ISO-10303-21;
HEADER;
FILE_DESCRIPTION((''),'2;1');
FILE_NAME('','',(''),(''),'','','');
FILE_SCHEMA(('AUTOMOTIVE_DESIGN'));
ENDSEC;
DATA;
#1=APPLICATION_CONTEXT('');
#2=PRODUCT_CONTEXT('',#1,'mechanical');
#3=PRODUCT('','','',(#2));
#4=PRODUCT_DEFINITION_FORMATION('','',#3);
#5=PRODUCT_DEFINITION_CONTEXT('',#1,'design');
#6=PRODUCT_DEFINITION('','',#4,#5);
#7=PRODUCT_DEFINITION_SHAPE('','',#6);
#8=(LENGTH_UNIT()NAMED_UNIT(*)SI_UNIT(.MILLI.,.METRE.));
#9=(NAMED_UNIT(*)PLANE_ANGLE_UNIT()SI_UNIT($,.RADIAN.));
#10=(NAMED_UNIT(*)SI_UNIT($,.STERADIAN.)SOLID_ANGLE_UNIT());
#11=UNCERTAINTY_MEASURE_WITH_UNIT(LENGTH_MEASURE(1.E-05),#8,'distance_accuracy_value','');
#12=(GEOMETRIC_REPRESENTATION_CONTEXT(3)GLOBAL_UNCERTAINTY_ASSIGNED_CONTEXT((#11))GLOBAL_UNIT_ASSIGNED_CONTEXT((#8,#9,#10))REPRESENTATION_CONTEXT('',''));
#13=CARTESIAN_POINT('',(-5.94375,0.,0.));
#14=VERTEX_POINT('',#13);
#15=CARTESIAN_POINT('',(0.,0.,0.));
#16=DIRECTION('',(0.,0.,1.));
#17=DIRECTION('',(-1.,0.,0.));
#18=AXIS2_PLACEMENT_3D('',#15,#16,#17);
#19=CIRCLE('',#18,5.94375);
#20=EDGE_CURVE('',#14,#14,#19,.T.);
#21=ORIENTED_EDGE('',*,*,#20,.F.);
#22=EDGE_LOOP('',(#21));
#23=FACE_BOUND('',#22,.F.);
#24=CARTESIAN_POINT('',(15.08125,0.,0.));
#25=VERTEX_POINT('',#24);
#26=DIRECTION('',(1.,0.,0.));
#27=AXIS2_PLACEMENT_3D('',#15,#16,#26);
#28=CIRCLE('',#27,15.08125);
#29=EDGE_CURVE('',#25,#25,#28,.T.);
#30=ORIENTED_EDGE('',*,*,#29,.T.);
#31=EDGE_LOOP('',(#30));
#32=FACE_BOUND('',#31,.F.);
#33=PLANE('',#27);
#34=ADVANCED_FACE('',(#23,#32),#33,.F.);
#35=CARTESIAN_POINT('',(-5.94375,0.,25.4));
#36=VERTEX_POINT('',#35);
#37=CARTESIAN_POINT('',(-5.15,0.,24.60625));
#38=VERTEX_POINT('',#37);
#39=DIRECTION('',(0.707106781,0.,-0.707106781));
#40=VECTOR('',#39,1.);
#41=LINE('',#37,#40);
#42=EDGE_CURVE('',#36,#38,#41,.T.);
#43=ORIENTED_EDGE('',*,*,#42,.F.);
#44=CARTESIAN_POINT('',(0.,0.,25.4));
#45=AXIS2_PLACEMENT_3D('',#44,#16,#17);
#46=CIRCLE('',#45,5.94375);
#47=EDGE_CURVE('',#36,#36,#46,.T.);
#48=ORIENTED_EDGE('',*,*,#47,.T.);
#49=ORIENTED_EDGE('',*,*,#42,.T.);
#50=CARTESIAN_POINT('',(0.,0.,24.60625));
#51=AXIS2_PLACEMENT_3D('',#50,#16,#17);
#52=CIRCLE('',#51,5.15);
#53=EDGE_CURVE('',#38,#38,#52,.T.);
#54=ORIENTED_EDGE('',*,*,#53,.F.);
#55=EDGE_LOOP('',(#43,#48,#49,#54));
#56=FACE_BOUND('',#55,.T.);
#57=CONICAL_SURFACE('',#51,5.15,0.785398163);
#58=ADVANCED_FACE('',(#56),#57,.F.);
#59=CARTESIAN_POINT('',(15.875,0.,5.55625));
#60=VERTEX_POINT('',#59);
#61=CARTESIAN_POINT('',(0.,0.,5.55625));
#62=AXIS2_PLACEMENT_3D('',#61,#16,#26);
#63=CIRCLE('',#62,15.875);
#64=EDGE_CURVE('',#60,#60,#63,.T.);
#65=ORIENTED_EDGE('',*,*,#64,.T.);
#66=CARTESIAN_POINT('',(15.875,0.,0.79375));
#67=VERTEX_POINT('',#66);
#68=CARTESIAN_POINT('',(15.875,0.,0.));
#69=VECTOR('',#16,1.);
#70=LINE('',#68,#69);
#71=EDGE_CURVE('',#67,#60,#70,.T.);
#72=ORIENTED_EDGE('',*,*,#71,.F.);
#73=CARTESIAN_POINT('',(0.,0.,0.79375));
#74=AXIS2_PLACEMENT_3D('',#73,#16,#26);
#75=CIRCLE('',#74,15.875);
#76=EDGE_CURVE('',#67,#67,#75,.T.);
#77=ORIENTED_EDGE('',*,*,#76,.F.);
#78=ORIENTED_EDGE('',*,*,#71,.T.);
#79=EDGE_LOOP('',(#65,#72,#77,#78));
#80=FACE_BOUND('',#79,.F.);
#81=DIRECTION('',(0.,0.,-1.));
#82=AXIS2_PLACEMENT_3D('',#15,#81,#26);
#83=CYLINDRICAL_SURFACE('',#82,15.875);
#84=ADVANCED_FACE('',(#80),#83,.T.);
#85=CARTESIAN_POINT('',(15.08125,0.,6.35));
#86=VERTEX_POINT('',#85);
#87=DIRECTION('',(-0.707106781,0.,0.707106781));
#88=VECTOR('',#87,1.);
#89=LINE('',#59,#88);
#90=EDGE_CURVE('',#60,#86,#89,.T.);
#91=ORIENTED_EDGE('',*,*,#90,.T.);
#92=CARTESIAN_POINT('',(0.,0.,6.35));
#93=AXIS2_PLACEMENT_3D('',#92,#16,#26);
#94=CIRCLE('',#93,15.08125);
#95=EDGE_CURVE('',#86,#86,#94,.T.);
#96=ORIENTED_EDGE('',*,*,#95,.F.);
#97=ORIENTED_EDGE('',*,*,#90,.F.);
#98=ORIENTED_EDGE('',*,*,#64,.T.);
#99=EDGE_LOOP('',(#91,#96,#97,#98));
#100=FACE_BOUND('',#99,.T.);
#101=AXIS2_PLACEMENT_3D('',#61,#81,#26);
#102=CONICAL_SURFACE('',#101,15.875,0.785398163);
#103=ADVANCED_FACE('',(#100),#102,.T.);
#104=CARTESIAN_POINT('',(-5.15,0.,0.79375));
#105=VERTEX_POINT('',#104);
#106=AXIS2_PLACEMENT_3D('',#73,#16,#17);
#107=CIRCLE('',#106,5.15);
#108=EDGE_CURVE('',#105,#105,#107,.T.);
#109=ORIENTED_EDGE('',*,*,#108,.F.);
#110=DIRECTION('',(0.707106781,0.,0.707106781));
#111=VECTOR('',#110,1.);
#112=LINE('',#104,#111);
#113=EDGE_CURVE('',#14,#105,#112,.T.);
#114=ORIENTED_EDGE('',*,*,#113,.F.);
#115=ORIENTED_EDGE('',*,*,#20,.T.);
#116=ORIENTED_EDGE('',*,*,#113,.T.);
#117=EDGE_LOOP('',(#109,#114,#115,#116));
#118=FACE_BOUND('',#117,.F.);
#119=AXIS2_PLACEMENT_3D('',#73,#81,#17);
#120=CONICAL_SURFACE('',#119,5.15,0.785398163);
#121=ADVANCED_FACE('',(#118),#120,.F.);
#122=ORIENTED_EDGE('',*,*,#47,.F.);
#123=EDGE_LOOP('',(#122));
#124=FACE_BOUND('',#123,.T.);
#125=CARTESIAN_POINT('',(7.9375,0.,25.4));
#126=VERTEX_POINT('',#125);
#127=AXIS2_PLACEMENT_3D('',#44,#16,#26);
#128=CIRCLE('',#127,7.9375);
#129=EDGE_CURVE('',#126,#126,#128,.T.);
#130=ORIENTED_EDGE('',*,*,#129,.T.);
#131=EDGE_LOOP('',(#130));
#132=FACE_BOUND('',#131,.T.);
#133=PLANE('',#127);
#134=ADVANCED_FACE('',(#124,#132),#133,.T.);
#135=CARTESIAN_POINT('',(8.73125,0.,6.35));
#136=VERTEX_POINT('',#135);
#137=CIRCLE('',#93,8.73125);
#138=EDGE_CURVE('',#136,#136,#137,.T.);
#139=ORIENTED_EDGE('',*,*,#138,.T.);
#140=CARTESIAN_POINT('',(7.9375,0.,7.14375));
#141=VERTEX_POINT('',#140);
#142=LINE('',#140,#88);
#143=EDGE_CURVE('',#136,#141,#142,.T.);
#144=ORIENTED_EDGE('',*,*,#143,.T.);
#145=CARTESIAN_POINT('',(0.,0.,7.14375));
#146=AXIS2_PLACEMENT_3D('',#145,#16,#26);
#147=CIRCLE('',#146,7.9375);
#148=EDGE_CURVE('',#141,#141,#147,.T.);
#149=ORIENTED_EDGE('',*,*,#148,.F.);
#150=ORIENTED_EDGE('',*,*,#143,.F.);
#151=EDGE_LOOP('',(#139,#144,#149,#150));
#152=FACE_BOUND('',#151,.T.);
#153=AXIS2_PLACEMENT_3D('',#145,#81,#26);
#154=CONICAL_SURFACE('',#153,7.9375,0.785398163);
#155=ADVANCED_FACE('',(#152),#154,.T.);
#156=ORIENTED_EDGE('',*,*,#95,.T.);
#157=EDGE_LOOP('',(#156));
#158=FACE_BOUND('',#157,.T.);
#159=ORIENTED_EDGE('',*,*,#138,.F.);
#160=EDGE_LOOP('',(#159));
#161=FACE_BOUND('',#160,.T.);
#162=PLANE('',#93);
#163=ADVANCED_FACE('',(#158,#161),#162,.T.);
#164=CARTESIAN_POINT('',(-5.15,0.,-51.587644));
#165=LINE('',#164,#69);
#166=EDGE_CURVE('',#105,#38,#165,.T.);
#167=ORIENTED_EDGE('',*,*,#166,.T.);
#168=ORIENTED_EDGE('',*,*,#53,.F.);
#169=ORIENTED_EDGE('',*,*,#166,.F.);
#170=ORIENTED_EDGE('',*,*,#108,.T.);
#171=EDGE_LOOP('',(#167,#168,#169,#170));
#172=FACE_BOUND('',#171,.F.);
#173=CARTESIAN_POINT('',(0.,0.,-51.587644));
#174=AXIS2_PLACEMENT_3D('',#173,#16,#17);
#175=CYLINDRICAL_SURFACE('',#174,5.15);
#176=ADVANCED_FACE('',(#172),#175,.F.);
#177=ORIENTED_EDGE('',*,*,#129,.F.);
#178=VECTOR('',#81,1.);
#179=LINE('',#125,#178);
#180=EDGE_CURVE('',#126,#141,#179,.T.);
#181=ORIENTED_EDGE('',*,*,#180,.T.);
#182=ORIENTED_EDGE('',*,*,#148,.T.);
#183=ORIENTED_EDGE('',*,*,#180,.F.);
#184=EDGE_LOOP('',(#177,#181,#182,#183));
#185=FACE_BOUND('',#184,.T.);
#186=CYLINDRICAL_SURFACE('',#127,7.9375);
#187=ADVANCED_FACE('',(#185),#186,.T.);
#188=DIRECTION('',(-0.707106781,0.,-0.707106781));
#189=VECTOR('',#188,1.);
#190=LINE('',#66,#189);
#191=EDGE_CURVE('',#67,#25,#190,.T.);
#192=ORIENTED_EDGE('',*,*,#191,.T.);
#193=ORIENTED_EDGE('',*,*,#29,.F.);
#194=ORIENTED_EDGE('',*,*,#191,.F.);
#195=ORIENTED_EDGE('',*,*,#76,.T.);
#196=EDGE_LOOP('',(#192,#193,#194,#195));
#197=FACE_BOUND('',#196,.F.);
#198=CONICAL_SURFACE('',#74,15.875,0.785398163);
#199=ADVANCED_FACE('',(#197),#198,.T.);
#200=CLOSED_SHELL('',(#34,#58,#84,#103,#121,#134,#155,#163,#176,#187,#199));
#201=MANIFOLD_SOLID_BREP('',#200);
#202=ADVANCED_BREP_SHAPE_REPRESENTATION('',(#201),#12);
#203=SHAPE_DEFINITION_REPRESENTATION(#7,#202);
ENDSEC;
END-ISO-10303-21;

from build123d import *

# Parameters (mm, degrees)
F0_R     = 15.875
F1_DEPTH = 25.4
F2_D     = 10.3
F3_SIZE  = 0.79375
F4_SIZE  = 0.79375
F5_R     = 15.875
F5_R_2   = 7.9375
F6_DEPTH = 19.05
F7_SIZE  = 0.79375


with BuildPart() as f1:
    # F0 (on Top) → F1 (new body)
    with BuildSketch(Plane.XY):
        Circle(F0_R)
    extrude(amount=F1_DEPTH)

    # F2 (through all)
    with Locations(Plane(origin=(0, 0, 0), x_dir=(1, 0, 0), z_dir=(0, 0, -1))):
        with Locations((0, 0)):
            Hole(F2_D / 2)

    # F3
    f3_edges = [f1.edges().sort_by_distance(p)[0] for p in [
        (-15.875, 0, 0),
    ]]
    chamfer(f3_edges, length=F3_SIZE)

    # F4
    f4_edges = [f1.edges().sort_by_distance(p)[0] for p in [
        (-15.875, 0, 25.4),
        (-5.15, 0, 25.4),
        (-5.15, 0, 0),
    ]]
    chamfer(f4_edges, length=F4_SIZE)

    # F5 (on face) → F6 (cut)
    with BuildSketch(Plane.XY.offset(25.4)):
        Circle(F5_R)
        Circle(F5_R_2, mode=Mode.SUBTRACT)
    extrude(amount=-F6_DEPTH, mode=Mode.SUBTRACT)

    # F7
    f7_edges = [f1.edges().sort_by_distance(p)[0] for p in [
        (-15.875, 0, 6.35),
        (-7.9375, 0, 6.35),
    ]]
    chamfer(f7_edges, length=F7_SIZE)


solid = f1.part
